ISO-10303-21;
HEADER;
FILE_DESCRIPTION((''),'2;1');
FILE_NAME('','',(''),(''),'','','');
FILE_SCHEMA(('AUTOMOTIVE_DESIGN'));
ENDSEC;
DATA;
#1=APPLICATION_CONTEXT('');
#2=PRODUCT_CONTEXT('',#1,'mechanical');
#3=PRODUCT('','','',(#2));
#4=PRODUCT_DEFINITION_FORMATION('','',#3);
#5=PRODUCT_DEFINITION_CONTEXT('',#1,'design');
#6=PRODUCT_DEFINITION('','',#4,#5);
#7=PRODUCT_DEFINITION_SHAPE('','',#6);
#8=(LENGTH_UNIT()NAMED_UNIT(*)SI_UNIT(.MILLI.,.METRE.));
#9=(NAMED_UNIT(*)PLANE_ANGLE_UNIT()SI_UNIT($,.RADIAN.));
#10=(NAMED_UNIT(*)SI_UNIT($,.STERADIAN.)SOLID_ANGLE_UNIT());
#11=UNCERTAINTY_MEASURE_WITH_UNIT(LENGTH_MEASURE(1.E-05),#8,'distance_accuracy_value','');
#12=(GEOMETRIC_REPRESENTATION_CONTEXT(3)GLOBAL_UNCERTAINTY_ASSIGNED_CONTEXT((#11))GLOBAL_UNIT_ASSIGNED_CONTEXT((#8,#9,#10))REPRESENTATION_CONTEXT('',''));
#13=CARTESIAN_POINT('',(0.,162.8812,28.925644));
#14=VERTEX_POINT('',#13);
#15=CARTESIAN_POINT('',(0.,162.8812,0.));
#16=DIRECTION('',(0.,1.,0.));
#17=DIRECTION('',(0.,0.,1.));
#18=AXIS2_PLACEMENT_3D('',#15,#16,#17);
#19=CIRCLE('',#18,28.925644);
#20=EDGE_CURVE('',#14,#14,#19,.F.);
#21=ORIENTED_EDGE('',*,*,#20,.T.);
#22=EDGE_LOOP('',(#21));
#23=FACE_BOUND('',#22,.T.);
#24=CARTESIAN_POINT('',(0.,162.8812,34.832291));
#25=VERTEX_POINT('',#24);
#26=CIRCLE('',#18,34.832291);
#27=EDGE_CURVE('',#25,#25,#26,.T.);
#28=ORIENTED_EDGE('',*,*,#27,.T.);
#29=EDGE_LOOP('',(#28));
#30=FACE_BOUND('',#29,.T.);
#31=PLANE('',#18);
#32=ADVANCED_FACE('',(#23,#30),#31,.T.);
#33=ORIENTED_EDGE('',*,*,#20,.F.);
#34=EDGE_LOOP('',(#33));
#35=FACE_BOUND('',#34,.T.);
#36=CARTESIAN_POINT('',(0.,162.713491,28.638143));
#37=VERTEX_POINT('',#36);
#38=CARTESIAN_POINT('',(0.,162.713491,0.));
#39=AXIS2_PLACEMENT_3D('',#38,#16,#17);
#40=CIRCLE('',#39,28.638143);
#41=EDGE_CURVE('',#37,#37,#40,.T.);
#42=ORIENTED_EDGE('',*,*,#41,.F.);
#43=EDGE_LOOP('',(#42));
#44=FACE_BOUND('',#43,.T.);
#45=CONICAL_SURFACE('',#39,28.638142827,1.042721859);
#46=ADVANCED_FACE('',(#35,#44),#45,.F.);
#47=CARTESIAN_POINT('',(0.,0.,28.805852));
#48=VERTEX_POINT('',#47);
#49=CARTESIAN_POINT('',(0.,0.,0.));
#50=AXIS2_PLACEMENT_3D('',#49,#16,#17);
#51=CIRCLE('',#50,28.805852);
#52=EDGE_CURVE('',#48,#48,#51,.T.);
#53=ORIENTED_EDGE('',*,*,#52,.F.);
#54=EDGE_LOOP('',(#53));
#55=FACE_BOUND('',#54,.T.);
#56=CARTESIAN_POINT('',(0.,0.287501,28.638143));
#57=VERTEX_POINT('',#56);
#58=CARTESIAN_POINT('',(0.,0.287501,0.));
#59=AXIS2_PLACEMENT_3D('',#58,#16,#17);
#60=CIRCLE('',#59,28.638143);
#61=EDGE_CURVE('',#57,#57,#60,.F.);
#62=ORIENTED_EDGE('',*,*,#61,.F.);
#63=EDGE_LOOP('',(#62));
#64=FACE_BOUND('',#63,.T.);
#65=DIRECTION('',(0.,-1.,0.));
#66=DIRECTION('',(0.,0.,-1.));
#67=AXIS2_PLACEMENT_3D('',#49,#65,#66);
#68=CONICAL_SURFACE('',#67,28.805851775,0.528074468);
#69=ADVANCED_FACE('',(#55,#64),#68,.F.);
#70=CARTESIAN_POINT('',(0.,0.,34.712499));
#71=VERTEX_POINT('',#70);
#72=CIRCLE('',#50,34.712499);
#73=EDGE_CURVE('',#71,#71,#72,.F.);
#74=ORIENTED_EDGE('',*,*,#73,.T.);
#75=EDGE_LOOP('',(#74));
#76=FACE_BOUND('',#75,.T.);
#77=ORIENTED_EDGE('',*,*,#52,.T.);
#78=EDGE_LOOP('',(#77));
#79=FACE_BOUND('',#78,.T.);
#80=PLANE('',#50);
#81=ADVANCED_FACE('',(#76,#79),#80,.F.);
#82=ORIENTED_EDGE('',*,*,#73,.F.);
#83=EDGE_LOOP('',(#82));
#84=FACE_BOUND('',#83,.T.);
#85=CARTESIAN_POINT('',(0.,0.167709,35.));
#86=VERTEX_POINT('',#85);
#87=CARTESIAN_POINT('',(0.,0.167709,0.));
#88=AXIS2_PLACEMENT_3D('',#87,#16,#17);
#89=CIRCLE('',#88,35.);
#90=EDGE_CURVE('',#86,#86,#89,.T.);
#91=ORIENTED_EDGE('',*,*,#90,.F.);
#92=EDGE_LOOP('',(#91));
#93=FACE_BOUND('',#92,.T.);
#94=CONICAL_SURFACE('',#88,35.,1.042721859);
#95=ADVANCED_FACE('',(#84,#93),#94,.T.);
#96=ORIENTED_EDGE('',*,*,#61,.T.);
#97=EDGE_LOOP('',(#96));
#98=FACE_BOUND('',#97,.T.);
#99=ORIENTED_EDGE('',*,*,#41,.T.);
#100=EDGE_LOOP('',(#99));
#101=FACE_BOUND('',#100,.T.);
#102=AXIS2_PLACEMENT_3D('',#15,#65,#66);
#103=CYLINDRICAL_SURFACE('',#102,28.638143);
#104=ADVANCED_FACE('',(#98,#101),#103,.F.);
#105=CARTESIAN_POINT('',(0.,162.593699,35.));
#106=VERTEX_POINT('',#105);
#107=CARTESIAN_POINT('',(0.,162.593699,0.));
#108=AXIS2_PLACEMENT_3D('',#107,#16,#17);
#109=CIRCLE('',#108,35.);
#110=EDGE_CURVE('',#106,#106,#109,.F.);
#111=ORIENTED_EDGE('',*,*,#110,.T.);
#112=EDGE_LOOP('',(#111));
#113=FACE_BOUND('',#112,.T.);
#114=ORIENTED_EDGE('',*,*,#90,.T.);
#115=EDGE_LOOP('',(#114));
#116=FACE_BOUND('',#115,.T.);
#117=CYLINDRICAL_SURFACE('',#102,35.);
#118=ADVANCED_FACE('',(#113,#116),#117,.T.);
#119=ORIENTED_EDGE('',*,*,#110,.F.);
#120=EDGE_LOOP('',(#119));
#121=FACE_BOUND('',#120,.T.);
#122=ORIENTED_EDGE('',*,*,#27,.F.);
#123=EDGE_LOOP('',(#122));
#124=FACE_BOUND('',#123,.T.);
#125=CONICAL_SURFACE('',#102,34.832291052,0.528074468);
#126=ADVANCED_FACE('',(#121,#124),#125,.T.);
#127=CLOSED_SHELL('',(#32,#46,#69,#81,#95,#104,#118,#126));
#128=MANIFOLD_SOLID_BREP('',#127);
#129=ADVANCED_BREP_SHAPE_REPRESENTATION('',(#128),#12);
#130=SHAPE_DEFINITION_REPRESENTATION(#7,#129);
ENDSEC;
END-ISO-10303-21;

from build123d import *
from OCP.BRepFilletAPI import BRepFilletAPI_MakeChamfer

# Parameters (mm, degrees)
SKETCH1_R           = 35
BOSS_EXTRUDE1_DEPTH = 162.881200186
SKETCH2_R           = 28.638142827
CUT_EXTRUDE1_DEPTH  = 171.235969683
CHAMFER1_SIZE       = 0.287501041
CHAMFER1_SIZE2      = 0.167708948


with BuildPart() as part:
    # Sketch1 → Boss-Extrude1 (new body)
    with BuildSketch(Plane(origin=(0, 0, 0), x_dir=(1, 0, 0), z_dir=(0, 1, 0))):
        Circle(SKETCH1_R)
    extrude(amount=BOSS_EXTRUDE1_DEPTH)

    # Sketch2 → Cut-Extrude1 (cut, through all)
    with BuildSketch(Plane(origin=(0, 0, 0), x_dir=(1, 0, 0), z_dir=(0, 1, 0))):
        Circle(SKETCH2_R)
    extrude(amount=CUT_EXTRUDE1_DEPTH, mode=Mode.SUBTRACT)

    # Chamfer1: one chamfer whose edges measure the first distance from different faces: ONE call of the kernel's chamfer builder (chamfer() names one face for all edges)
    chamfer1_edges_1 = [part.edges().sort_by_distance(p)[0] for p in [
        (-28.638142827, 162.881200186, 0),
    ]]
    chamfer1_side_1 = [part.faces().sort_by_distance(p)[0] for p in [
        (-34.010050506, 162.881200186, 0),
    ]]
    chamfer1_edges_2 = [part.edges().sort_by_distance(p)[0] for p in [
        (-28.638142827, 0, 0),
    ]]
    chamfer1_side_2 = [part.faces().sort_by_distance(p)[0] for p in [
        (-28.638142827, 81.440600093, 0),
    ]]
    chamfer1_edges_3 = [part.edges().sort_by_distance(p)[0] for p in [
        (-35, 0, 0),
    ]]
    chamfer1_side_3 = [part.faces().sort_by_distance(p)[0] for p in [
        (-34.010050506, 0, 0),
    ]]
    chamfer1_edges_4 = [part.edges().sort_by_distance(p)[0] for p in [
        (-35, 162.881200186, 0),
    ]]
    chamfer1_side_4 = [part.faces().sort_by_distance(p)[0] for p in [
        (-35, 81.440600093, 0),
    ]]
    chamfer1 = BRepFilletAPI_MakeChamfer(part.part.solid().wrapped)
    for e in chamfer1_edges_1:
        chamfer1.Add(CHAMFER1_SIZE, CHAMFER1_SIZE2, e.wrapped, chamfer1_side_1[0].wrapped)  # the first distance lies on this face
    for e in chamfer1_edges_2:
        chamfer1.Add(CHAMFER1_SIZE, CHAMFER1_SIZE2, e.wrapped, chamfer1_side_2[0].wrapped)  # the first distance lies on this face
    for e in chamfer1_edges_3:
        chamfer1.Add(CHAMFER1_SIZE, CHAMFER1_SIZE2, e.wrapped, chamfer1_side_3[0].wrapped)  # the first distance lies on this face
    for e in chamfer1_edges_4:
        chamfer1.Add(CHAMFER1_SIZE, CHAMFER1_SIZE2, e.wrapped, chamfer1_side_4[0].wrapped)  # the first distance lies on this face
    add(Compound.cast(chamfer1.Shape()), mode=Mode.REPLACE)


solid = part.part
